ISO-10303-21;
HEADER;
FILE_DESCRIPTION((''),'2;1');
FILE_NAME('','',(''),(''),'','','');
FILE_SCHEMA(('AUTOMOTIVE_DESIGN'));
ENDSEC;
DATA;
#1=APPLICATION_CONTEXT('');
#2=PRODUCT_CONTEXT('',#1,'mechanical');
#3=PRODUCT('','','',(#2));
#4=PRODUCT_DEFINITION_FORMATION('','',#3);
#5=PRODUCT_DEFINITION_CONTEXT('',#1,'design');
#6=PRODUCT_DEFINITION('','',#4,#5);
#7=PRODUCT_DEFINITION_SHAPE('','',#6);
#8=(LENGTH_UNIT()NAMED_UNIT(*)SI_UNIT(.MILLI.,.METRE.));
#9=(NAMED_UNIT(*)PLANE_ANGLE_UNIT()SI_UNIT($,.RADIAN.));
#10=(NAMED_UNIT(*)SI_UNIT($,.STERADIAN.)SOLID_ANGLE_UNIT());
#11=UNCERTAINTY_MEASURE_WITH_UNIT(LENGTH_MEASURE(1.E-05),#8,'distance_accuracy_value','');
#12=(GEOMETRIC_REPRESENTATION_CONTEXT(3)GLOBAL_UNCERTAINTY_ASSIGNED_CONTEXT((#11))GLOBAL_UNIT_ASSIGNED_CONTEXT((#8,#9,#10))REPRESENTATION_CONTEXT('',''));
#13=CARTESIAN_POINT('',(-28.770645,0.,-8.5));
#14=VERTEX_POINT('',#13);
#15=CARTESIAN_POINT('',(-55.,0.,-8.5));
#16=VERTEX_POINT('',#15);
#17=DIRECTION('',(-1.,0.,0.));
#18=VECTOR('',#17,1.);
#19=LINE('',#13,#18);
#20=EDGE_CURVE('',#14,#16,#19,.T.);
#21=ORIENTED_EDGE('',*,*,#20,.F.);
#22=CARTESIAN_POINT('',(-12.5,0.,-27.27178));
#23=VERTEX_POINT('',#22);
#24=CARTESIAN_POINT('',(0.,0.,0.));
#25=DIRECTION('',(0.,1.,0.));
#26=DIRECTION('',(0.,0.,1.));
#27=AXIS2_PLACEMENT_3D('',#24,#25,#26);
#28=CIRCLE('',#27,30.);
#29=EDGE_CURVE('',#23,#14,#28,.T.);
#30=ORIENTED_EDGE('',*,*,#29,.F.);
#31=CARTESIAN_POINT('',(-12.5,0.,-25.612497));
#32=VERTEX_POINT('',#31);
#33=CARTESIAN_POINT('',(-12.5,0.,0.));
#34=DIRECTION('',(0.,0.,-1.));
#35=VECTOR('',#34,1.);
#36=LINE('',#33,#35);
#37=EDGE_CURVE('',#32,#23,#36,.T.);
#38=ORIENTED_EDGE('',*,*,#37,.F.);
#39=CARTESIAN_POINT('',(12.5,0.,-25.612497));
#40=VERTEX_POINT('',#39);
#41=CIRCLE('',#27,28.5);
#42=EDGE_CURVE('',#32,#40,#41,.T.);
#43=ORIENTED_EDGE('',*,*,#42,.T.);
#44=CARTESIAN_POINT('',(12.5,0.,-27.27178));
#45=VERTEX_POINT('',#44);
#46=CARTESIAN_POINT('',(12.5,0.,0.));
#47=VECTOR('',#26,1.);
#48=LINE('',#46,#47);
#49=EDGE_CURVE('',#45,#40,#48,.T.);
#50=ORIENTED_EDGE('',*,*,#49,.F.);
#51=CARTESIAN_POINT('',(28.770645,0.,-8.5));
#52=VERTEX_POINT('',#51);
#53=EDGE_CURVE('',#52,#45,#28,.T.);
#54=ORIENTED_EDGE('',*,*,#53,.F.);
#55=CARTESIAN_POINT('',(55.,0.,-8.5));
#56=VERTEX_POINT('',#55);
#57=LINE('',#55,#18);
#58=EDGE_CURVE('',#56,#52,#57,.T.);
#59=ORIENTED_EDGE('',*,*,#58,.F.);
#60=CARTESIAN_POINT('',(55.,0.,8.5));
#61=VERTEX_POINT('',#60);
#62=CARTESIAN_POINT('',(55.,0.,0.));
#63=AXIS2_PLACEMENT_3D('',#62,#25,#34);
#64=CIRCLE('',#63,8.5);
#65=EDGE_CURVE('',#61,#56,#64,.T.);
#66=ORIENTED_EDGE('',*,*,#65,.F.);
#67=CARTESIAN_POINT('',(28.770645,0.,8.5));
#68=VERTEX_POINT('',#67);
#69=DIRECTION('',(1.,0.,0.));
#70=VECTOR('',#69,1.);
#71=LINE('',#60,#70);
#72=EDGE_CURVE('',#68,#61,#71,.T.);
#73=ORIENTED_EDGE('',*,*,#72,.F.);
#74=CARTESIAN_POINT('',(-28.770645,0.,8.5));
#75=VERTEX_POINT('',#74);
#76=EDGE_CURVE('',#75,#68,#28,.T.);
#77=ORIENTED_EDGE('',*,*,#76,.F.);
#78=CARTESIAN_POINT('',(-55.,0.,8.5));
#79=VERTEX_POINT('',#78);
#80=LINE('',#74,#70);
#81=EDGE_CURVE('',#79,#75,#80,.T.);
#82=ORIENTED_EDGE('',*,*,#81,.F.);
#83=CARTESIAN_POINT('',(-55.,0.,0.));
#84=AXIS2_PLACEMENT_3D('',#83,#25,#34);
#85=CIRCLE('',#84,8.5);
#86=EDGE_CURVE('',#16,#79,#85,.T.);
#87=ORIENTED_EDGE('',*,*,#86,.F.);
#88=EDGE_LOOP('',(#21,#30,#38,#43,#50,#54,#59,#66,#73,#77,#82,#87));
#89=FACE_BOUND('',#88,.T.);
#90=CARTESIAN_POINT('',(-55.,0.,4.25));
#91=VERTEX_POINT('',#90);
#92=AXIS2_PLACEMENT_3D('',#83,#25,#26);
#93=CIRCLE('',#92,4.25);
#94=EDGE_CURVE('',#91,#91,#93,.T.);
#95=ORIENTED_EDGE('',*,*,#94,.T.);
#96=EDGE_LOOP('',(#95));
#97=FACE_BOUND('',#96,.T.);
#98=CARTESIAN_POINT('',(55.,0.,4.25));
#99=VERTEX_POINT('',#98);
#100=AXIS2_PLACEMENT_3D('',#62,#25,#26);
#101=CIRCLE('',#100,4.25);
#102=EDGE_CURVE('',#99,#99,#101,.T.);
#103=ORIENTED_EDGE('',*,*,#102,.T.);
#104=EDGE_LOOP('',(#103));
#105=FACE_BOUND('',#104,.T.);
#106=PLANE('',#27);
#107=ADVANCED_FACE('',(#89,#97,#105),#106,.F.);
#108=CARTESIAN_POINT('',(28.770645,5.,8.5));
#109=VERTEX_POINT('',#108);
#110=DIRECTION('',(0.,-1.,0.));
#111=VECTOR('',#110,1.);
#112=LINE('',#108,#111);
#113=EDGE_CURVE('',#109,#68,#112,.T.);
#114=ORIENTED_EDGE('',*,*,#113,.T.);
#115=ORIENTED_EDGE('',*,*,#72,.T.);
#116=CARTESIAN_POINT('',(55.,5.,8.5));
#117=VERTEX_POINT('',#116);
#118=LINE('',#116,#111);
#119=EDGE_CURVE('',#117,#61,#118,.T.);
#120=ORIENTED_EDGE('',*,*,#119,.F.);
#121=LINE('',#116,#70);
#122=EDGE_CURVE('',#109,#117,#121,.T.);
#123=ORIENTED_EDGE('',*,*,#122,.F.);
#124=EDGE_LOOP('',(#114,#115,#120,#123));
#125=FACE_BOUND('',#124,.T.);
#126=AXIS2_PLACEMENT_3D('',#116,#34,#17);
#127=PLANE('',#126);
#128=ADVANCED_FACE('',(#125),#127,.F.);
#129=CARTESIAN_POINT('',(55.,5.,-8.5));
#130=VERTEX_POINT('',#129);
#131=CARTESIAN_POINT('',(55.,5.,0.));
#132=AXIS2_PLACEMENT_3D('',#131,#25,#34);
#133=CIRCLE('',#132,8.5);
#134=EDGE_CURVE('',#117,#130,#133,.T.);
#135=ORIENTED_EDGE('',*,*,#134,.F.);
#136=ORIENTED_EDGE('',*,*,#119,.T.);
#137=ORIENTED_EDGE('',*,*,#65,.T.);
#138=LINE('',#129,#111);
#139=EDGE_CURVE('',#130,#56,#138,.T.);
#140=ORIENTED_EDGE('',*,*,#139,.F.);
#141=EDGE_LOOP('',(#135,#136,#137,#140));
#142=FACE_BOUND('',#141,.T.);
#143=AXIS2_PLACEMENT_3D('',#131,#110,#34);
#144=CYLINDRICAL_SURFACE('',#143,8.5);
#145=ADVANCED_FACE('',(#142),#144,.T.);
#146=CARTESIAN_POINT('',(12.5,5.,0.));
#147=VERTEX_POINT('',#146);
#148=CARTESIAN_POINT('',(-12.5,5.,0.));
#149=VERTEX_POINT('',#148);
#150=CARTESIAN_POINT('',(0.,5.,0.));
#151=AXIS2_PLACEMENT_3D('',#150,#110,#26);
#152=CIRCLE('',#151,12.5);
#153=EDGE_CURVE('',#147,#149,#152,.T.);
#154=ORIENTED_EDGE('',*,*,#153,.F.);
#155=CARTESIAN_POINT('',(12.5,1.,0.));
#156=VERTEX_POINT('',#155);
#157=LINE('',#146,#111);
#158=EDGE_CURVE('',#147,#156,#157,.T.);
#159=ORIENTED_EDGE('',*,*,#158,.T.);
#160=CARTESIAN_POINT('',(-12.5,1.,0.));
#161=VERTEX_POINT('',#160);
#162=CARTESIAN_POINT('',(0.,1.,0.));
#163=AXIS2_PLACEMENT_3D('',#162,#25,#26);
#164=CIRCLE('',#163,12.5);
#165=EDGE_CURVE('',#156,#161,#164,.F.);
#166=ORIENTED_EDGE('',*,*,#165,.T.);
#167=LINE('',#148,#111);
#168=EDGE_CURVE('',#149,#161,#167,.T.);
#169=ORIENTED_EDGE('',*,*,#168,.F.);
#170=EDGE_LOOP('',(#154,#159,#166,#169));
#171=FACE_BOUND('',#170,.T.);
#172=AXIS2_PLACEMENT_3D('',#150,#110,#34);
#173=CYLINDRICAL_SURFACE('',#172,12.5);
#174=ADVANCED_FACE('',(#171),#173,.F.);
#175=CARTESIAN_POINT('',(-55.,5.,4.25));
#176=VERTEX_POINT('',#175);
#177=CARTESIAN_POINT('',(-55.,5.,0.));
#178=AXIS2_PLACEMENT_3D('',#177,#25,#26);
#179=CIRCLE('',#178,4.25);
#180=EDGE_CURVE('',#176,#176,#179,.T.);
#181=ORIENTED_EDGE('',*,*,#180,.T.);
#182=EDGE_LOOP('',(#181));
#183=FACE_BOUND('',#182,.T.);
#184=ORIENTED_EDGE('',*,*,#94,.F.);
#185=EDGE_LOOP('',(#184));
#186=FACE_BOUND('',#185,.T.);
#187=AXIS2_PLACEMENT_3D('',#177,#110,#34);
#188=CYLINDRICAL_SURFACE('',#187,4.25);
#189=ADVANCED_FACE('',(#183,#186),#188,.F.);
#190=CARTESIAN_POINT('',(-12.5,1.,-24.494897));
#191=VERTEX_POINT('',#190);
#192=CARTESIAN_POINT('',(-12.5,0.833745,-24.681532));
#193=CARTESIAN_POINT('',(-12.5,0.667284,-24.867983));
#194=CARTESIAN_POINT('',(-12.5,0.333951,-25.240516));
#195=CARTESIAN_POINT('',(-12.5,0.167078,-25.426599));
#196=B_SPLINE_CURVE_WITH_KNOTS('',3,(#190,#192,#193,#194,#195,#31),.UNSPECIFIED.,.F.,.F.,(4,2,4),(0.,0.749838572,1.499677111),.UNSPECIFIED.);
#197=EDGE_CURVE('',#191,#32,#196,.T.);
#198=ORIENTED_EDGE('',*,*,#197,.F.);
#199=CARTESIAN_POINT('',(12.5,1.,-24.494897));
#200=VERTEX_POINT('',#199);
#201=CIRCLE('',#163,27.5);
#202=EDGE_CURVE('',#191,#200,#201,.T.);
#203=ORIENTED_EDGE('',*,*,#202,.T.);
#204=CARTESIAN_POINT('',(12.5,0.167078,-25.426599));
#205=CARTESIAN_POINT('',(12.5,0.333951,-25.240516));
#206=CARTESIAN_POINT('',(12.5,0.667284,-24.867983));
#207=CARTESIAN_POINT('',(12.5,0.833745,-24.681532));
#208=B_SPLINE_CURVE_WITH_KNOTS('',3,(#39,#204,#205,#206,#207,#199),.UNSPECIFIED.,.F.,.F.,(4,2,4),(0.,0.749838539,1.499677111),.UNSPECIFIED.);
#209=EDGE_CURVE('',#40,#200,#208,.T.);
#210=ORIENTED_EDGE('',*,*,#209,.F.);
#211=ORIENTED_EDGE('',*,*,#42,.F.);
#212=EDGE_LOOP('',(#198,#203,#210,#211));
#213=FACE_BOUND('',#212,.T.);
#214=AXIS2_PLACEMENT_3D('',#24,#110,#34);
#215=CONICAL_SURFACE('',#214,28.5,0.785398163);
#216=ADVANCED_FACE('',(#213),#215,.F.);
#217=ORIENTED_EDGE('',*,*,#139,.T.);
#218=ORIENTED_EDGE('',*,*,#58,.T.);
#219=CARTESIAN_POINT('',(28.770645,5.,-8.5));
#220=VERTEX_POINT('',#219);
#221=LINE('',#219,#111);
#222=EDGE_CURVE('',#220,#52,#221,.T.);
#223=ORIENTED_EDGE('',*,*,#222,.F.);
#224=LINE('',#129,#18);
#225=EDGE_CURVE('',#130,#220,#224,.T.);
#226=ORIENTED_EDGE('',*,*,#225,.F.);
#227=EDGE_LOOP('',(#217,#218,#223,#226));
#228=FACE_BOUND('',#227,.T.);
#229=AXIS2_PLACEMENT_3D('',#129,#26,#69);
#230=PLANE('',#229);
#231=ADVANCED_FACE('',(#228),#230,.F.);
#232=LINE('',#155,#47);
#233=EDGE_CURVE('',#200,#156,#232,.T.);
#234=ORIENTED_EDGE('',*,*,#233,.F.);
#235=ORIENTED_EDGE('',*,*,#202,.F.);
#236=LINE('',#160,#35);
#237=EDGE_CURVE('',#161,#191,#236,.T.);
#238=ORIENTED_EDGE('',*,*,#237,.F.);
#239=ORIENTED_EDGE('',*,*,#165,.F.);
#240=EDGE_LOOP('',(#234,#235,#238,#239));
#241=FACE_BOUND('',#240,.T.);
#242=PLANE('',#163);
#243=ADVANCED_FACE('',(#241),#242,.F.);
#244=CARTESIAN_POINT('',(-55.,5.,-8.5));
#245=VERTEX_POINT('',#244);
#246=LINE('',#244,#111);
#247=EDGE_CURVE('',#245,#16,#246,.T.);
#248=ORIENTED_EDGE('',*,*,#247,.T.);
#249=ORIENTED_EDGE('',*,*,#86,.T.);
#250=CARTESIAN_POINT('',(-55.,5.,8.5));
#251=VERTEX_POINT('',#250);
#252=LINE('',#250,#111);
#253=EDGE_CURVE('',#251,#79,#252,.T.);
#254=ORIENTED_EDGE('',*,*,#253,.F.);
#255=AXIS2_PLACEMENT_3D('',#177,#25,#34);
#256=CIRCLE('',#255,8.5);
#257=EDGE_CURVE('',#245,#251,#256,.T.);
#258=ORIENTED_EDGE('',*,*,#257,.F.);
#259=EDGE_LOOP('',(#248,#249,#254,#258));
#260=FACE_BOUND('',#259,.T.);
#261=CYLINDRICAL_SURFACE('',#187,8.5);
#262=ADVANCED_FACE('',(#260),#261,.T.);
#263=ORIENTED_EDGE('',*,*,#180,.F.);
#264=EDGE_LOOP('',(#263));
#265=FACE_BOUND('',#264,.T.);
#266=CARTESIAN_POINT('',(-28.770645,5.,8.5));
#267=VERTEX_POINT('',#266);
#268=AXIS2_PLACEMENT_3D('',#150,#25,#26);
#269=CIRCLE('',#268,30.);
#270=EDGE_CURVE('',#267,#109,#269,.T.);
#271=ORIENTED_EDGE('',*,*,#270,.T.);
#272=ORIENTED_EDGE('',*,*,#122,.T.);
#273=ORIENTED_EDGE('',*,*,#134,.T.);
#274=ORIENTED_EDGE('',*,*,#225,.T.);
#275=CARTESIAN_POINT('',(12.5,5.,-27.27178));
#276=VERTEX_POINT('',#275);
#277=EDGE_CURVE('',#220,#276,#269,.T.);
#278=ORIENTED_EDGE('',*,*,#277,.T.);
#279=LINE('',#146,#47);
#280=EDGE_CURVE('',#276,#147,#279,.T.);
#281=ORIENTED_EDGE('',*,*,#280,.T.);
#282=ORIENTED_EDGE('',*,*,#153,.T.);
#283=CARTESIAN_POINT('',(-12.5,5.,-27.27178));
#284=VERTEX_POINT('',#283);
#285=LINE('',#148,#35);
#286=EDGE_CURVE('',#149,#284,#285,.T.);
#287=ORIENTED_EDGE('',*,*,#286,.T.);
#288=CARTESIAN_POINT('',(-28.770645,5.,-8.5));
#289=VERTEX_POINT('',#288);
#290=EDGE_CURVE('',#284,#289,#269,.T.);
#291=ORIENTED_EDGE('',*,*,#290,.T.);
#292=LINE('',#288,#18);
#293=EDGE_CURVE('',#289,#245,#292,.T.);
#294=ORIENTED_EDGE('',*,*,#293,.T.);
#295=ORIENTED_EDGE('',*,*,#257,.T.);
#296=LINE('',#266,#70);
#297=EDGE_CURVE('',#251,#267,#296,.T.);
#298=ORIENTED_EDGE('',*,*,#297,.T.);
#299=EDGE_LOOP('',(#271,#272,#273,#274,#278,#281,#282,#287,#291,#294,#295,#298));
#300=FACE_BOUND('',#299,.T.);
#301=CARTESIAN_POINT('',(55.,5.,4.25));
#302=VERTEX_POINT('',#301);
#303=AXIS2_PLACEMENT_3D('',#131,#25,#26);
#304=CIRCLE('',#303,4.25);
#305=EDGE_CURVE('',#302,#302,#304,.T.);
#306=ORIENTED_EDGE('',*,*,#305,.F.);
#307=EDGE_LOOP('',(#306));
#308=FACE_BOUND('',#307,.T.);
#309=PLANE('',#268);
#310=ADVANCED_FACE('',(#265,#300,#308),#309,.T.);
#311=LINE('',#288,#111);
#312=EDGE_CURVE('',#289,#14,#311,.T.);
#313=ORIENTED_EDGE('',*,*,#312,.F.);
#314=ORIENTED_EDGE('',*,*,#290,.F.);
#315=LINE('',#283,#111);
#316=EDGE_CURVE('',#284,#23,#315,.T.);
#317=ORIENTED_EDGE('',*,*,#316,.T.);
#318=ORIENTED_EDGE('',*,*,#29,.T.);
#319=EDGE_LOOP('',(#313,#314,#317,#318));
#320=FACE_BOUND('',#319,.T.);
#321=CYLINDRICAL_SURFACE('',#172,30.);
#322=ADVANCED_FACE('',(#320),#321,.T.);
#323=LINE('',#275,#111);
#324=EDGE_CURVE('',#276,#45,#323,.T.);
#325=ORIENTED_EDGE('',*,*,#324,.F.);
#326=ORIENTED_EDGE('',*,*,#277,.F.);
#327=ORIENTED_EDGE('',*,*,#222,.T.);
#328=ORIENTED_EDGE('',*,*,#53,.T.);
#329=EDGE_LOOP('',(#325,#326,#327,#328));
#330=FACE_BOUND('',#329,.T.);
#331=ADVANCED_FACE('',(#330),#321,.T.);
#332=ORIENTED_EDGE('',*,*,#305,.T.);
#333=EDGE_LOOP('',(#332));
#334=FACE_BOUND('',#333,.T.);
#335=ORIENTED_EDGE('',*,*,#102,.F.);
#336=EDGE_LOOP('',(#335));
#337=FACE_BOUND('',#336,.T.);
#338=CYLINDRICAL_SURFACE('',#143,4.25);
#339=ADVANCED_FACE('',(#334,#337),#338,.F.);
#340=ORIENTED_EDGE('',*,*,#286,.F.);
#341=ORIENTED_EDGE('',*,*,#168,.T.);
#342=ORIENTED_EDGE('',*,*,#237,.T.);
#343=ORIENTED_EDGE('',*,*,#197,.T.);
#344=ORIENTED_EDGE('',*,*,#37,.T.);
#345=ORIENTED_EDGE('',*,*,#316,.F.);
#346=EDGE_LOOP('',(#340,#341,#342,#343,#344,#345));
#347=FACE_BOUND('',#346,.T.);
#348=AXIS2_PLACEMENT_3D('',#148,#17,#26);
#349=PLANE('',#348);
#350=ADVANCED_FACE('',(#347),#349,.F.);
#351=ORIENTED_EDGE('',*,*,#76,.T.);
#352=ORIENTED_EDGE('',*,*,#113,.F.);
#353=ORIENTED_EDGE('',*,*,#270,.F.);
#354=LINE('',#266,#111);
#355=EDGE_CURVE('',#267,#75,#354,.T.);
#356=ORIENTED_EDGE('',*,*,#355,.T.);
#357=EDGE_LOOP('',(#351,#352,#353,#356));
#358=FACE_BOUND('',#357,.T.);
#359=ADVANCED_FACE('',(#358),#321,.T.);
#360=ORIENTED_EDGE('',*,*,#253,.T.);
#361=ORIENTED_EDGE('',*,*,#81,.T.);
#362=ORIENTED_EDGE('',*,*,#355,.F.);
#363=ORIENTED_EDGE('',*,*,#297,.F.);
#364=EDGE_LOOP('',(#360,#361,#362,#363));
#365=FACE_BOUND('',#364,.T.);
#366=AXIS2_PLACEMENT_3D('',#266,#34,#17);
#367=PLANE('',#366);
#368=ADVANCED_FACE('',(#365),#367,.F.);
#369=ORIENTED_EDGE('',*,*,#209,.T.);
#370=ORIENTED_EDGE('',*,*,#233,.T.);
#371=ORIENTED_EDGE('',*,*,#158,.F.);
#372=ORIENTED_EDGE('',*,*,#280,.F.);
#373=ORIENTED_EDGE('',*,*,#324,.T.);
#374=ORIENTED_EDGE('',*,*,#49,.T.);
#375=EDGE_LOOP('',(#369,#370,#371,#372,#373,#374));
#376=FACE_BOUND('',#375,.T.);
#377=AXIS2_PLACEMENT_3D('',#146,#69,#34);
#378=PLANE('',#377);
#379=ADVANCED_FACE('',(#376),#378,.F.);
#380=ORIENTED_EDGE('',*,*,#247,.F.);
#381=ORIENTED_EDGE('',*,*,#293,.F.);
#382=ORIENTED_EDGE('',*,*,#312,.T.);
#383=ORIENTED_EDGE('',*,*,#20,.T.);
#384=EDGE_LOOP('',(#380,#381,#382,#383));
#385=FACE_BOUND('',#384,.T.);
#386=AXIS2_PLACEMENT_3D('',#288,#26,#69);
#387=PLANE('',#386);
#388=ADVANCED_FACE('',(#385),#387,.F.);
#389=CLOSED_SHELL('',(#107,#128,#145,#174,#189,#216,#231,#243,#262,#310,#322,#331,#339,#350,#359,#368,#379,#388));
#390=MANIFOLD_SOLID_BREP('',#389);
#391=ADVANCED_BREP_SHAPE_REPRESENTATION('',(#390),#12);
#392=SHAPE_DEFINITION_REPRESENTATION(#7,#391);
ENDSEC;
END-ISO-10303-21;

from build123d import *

# Parameters (mm, degrees)
SKETCH1_R           = 4.25
BOSS_EXTRUDE1_DEPTH = 5
SKETCH2_R           = 27.5
CUT_EXTRUDE1_DEPTH  = 1
CHAMFER1_SIZE       = 1


with BuildPart() as part:
    # Sketch1 → Boss-Extrude1 (new body)
    with BuildSketch(Plane(origin=(0, 0, 0), x_dir=(1, 0, 0), z_dir=(0, 1, 0))):
        with BuildLine():
            Line((55, 8.5), (28.770644762, 8.5))
            ThreePointArc((28.770644762, 8.5), (22.669615426, 19.649135769), (12.5, 27.271780287))
            Line((12.5, 27.271780287), (12.5, 0))
            ThreePointArc((12.5, 0), (0, -12.5), (-12.5, 0))
            Line((-12.5, 0), (-12.5, 27.271780287))
            ThreePointArc((-12.5, 27.271780287), (-22.669615426, 19.649135769), (-28.770644762, 8.5))
            Line((-28.770644762, 8.5), (-55, 8.5))
            ThreePointArc((-55, 8.5), (-63.5, 0), (-55, -8.5))
            Line((-55, -8.5), (-28.770644762, -8.5))
            ThreePointArc((-28.770644762, -8.5), (0, -30), (28.770644762, -8.5))
            Line((28.770644762, -8.5), (55, -8.5))
            ThreePointArc((55, -8.5), (63.5, 0), (55, 8.5))
        make_face()
        with Locations(Location((-55, 0, 0), (0, 0, 270))):
            Circle(SKETCH1_R, mode=Mode.SUBTRACT)
        with Locations(Location((55, 0, 0), (0, 0, 270))):
            Circle(SKETCH1_R, mode=Mode.SUBTRACT)
    extrude(amount=BOSS_EXTRUDE1_DEPTH)

    # Sketch2 → Cut-Extrude1 (cut)
    with BuildSketch(Plane(origin=(0, 0, 0), x_dir=(1, 0, 0), z_dir=(0, 1, 0))):
        Circle(SKETCH2_R)
    extrude(amount=CUT_EXTRUDE1_DEPTH, mode=Mode.SUBTRACT)

    # Chamfer1
    chamfer1_edges = [part.edges().sort_by_distance(p)[0] for p in [
        (0, 0, 27.5),
    ]]
    chamfer(chamfer1_edges, length=CHAMFER1_SIZE - 0.0001)  # a hair under: the kernel refuses the full size


solid = part.part
